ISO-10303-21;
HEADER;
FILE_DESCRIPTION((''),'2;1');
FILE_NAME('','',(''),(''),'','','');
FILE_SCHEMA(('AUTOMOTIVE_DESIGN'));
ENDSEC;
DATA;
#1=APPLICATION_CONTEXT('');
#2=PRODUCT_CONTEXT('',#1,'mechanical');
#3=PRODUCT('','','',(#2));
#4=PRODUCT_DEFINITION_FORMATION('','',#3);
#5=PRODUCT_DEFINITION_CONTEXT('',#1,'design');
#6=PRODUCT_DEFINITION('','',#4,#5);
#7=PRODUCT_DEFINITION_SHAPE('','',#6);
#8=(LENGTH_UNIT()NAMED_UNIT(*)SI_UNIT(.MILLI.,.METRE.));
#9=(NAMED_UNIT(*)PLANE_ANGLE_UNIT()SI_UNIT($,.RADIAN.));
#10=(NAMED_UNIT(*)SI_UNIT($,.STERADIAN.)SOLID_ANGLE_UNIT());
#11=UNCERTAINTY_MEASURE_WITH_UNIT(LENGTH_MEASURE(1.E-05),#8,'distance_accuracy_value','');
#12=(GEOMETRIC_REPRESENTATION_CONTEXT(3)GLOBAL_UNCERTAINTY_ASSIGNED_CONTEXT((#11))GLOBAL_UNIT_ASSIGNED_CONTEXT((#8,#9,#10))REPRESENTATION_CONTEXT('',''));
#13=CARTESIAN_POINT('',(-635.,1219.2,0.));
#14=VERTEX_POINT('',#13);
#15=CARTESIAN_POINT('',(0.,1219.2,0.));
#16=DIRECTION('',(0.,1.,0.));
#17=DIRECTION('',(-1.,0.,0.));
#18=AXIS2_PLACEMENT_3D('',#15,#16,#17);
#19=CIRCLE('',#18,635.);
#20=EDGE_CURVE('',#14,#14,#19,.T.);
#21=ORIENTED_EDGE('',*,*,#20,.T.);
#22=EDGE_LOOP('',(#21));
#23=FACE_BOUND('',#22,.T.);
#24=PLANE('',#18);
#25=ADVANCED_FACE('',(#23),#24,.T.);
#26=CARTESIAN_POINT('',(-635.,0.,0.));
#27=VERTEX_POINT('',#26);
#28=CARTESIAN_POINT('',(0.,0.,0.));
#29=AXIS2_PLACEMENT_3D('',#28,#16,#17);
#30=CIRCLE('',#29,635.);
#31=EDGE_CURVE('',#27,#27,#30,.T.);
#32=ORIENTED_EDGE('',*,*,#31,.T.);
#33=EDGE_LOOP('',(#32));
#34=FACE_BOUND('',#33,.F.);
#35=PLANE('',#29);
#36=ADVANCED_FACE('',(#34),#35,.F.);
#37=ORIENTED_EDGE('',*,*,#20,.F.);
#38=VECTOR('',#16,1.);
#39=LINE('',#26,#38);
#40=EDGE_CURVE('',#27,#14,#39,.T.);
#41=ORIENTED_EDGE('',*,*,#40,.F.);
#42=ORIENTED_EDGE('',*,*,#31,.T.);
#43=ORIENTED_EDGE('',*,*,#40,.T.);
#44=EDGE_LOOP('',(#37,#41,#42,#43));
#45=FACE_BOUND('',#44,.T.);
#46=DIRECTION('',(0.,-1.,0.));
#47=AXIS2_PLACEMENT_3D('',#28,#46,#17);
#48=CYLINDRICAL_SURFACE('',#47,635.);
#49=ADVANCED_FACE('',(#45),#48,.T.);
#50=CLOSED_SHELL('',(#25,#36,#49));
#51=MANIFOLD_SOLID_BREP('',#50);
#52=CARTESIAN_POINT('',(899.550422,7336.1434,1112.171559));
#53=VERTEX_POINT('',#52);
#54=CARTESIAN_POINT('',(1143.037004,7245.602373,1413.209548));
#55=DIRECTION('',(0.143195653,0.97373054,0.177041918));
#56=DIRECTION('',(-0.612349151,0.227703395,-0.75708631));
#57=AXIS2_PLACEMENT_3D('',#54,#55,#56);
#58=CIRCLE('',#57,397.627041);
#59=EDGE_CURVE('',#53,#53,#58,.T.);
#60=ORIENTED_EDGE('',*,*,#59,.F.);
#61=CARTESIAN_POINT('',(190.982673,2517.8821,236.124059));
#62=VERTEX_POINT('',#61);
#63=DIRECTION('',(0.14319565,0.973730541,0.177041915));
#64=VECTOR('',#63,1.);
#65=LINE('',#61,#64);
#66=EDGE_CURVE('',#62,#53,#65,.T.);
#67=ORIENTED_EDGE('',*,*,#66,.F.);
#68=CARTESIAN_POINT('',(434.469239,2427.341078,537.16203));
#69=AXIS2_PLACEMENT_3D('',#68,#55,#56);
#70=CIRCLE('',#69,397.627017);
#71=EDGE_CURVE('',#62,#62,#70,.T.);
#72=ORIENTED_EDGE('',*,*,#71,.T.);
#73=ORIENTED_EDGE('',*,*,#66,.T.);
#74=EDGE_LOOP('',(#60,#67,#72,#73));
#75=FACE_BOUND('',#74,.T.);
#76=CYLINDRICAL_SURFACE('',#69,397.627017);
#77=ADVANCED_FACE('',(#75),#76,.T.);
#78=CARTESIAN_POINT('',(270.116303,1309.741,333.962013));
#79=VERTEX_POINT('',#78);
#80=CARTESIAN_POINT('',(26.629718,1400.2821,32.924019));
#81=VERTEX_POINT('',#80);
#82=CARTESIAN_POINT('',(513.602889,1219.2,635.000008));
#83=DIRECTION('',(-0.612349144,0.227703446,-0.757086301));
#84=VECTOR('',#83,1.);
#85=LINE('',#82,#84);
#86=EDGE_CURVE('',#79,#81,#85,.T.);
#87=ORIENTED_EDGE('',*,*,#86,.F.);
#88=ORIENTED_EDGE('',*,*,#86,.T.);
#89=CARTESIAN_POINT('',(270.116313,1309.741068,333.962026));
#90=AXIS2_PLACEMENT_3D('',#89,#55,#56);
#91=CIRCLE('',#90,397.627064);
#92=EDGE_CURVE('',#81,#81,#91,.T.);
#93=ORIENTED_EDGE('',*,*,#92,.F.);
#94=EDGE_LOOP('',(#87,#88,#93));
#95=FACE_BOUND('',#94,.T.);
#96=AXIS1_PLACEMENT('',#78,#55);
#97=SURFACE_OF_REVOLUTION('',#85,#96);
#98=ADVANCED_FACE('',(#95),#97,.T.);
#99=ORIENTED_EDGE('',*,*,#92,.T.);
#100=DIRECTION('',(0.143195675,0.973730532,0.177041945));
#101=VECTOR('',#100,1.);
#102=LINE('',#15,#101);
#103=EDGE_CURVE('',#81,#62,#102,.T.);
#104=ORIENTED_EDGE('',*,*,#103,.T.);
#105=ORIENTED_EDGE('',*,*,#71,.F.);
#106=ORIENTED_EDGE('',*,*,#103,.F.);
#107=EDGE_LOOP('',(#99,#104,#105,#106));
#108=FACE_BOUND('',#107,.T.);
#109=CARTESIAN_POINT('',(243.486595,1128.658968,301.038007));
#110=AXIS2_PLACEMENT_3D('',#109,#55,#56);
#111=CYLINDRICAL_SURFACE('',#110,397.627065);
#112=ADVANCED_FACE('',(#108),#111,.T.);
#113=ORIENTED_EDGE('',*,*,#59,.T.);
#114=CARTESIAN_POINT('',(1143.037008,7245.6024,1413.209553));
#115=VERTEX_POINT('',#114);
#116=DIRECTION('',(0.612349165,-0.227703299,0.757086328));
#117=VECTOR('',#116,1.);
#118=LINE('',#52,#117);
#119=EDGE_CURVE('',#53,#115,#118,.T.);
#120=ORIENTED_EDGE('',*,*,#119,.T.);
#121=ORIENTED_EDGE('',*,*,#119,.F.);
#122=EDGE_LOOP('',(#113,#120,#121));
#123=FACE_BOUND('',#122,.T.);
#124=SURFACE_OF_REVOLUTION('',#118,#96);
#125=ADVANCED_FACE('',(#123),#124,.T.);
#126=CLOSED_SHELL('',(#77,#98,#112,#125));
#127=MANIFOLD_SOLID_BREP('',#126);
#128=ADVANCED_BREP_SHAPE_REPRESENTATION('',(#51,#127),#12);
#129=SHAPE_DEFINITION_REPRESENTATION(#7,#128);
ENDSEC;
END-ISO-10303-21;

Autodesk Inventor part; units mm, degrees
ref_plane "YZ Plane" through (0, 0, 0) normal (1, 0, 0) x (0, 1, 0)
sketch "Sketch1" plane through (0, 0, 0) normal (0, 1, 0) x (-1, 0, 0)
  circle A0 centre (0, 0) radius 635
  dimension "d0" = 1270
extrude "Extrusion1" add sketch "Sketch1" along normal blind 1219.2
ref_plane "Work Plane2" through (0, 0, 635) normal (0, 0, 1) x (1, 0, 0)
ref_plane "Work Plane3" through (0, 0, 939.8) normal (0, 0, 1) x (1, 0, 0)
sketch "Sketch2" plane through (0, 1219.2, 0) normal (0, 1, 0) x (1, 0, 0)
  line L0 (0, 0) -> (698.5, -863.6)
  line L1 (698.5, -863.6) -> (0, -863.6)
  line L2 (0, -863.6) -> (0, 0)
  circle A0 centre (0, 0) radius 635 projected
  line L3 (1039.1588, -635) -> (-914.0265, -635) projected
  line L4 (1039.1588, -939.8) -> (-914.0265, -939.8) projected
  line L5 (760.1324, -939.8) -> (0, -939.8)
  point P0 (513.6029, -635)
  dimension "d3" = 863.6
  dimension "d11" = 698.5
ref_plane "Work Plane5" through (0, 1219.2, 0) normal (-0.7775111, 0, 0.6288692) x (0.6288692, 0, 0.7775111)
sketch "Sketch4" plane through (0, 1219.2, 0) normal (0, 1, 0) x (1, 0, 0)
  line L0 (0, -863.6) -> (0, 0) projected
  line L1 (1024.4813, -1266.6315) -> (-825.9616, 1021.1889) projected
  line L2 (1039.1588, -939.8) -> (-914.0265, -939.8) projected
  line L3 (0, -838.2) -> (677.9559, -838.2)
  dimension "d10" = 101.6
sketch "Sketch3" plane through (0, 1219.2, 0) normal (-0.7775111, 0, 0.6288692) x (0.6288692, 0, 0.7775111)
  line L0 (1208.7288, 0) -> (1208.7288, 1117.6)
  line L1 (635, -1219.2) -> (-635, -1219.2) projected
  line L2 (816.7086, 0) -> (1078.0554, 1117.6)
  line L3 (1078.0554, 0) -> (1078.0554, 1117.6)
  line L4 (0, 0) -> (303.6922, 1298.6821)
  line L5 (1078.0554, 1117.6) -> (303.6922, 1298.6821)
  line L6 (816.7086, 0) -> (42.3454, 181.0821)
  line L7 (429.527, 90.541) -> (1817.6069, 6026.4024)
  line L8 (303.6922, 1298.6821) -> (1430.4253, 6116.9434)
  line L9 (1430.4253, 6116.9434) -> (2204.7886, 5935.8614)
  line L10 (2204.7886, 5935.8614) -> (1078.0554, 1117.6)
  point P0 (0, -1219.2)
  point P1 (690.8738, 1208.141)
  dimension "d8" = 1117.6
  dimension "d9" = 1219.2
  dimension "d13" = 6096
revolve "Revolution1" add sketch "Sketch3" angle 360 about axis through (270.1163, 1309.741, 333.962) along (0.1431957, 0.9737305, 0.1770419) contours L6 L4 L5 L7 | L5 L8 L9 L7
properties part number "Maple_Tree" material "Wood (Maple)"
